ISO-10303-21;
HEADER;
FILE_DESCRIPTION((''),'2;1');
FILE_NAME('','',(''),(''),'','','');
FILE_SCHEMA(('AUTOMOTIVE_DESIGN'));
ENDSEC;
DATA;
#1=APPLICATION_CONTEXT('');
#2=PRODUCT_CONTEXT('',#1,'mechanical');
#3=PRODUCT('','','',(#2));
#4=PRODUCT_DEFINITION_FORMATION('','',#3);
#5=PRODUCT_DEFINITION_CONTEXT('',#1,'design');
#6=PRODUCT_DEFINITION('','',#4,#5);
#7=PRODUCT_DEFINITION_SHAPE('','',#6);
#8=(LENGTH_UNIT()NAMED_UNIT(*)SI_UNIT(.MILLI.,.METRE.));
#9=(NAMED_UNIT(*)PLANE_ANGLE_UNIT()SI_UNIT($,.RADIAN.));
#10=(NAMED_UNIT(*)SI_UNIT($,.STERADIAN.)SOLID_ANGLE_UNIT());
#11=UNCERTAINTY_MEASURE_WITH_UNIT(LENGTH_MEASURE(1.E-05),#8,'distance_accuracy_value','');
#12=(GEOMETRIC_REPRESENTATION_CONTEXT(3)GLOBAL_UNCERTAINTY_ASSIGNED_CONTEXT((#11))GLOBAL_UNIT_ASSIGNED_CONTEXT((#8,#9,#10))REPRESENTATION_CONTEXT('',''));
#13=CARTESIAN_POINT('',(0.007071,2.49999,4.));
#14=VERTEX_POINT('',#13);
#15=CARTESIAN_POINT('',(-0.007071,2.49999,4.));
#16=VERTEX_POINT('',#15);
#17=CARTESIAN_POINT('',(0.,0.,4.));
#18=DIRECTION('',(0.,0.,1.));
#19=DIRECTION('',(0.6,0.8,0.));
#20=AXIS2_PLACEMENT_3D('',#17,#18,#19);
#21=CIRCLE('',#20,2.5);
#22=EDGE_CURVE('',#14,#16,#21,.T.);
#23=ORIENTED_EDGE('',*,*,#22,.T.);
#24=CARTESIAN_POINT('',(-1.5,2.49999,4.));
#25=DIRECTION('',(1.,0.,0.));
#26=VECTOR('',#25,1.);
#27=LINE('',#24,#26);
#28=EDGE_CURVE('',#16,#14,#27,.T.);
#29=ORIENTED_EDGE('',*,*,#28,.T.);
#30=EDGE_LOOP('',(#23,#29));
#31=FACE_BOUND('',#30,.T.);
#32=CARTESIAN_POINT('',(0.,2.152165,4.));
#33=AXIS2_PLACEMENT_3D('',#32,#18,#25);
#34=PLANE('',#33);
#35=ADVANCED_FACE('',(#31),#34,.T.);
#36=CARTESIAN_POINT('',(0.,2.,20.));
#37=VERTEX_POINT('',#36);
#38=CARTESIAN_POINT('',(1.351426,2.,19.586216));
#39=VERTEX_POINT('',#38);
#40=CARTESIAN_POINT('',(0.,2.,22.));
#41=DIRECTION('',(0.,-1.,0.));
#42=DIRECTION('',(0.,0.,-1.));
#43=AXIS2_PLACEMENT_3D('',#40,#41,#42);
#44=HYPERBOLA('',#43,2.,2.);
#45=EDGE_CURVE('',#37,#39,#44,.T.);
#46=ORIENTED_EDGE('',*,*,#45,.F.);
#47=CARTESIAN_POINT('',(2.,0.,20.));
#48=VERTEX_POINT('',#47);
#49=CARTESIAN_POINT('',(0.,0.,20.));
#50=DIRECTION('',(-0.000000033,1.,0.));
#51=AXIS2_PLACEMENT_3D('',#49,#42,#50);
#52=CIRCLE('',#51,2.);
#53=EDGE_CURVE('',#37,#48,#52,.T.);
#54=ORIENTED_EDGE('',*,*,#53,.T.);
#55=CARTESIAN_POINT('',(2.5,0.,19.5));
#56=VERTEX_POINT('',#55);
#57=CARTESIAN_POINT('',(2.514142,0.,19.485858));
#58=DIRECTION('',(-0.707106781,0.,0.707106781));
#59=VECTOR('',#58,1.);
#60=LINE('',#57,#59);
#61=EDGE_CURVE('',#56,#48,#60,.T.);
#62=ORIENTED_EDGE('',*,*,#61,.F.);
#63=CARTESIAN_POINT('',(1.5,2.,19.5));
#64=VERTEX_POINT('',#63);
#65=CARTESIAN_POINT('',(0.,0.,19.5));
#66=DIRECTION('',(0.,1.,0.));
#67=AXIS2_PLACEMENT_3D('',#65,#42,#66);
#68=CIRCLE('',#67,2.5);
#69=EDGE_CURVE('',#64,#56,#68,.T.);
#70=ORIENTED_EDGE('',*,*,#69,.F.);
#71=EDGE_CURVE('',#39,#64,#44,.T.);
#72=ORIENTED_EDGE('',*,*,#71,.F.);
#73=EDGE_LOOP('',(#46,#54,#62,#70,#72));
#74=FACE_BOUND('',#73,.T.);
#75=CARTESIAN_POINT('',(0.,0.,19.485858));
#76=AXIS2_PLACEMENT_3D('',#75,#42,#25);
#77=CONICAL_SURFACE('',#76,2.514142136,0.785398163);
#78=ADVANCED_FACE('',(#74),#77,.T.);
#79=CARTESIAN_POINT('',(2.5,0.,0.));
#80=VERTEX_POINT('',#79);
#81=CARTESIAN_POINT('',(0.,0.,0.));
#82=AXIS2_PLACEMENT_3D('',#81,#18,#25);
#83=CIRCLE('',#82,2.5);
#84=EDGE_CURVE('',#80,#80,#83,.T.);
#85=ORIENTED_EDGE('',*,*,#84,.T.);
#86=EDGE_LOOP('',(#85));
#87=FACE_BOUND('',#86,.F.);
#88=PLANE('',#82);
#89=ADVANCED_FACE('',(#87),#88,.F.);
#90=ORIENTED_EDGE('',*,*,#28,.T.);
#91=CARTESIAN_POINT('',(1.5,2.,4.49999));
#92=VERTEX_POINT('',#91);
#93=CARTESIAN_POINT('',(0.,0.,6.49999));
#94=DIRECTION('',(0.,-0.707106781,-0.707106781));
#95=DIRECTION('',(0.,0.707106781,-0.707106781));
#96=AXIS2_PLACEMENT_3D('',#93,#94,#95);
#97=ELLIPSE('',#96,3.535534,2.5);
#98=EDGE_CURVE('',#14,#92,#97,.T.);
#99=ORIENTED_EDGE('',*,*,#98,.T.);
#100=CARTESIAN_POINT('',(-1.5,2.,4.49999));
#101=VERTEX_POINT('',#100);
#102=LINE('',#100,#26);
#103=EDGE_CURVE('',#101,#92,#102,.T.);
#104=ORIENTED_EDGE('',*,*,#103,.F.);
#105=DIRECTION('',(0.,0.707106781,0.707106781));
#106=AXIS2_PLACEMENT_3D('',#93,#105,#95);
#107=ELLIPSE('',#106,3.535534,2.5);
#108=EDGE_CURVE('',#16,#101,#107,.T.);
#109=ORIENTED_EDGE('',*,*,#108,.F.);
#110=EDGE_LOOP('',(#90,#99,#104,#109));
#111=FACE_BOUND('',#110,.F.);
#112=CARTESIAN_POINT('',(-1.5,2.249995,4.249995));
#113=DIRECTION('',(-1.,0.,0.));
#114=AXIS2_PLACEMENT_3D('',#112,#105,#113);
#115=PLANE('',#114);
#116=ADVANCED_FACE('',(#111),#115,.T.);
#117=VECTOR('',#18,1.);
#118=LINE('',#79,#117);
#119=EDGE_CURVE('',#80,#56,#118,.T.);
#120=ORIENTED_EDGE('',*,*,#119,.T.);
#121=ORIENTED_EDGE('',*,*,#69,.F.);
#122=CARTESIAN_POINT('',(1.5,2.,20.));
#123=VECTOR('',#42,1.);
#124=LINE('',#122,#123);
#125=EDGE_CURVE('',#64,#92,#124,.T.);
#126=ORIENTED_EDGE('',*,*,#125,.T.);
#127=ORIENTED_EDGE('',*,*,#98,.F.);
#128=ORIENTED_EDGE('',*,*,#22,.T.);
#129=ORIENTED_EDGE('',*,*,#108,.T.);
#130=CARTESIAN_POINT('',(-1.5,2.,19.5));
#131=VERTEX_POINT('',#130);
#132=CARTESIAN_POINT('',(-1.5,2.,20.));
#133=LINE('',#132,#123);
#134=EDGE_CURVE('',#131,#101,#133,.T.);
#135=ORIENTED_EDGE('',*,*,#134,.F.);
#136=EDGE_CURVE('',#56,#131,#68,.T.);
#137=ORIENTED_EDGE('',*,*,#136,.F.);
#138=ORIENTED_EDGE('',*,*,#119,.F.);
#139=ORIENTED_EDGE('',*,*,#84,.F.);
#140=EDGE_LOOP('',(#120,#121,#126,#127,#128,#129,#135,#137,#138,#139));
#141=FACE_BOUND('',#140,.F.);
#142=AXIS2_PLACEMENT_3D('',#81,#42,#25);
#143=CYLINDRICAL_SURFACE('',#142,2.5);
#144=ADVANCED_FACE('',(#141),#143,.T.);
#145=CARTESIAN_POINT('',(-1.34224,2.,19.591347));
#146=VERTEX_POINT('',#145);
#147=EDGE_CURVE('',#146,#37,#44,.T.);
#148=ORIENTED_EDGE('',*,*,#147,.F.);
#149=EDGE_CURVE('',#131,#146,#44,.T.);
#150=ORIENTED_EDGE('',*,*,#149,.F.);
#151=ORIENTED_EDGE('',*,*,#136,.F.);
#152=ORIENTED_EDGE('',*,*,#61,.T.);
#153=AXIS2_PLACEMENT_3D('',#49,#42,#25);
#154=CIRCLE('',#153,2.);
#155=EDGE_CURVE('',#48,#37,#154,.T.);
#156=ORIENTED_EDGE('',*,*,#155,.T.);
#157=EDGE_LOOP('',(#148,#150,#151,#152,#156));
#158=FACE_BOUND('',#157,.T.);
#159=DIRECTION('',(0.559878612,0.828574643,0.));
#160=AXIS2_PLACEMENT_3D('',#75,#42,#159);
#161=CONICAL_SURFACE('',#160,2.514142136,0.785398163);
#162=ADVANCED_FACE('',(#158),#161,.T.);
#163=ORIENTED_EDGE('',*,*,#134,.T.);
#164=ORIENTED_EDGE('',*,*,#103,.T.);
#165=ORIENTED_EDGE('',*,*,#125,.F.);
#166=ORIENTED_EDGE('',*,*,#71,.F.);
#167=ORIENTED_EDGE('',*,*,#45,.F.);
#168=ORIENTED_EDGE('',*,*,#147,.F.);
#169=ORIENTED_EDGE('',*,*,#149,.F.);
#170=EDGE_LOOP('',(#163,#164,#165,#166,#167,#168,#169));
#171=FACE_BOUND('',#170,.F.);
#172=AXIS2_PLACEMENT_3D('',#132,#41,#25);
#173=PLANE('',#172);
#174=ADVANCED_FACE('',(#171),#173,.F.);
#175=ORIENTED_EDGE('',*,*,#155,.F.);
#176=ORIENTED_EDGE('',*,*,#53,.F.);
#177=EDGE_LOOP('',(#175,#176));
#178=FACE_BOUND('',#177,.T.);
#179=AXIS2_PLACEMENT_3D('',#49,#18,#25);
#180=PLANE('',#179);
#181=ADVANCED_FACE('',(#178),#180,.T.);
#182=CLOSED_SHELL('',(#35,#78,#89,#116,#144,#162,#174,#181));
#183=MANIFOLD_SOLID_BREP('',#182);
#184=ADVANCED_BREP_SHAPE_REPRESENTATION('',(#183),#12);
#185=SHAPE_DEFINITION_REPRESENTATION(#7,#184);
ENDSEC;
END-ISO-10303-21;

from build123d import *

# Parameters (mm, degrees)
F0_R        = 2.5
F1_DEPTH    = 20
F3_DEPTH    = 16
F4_T2_ANGLE = 304.0474034012
F4_T4_ANGLE = 123.8663608487
F5_SIZE     = 0.49999


# Not quite as in the source:
# - a fillet or chamfer that OpenCascade refuses, or shapes differently, is made with other operations: its cross-section is extruded or revolved along the edge and cut away or added
# - a fillet or chamfer is up to 0.001 mm smaller than in the source, because OpenCascade refuses the exact size


with BuildPart() as f1:
    # F0 (on Top) → F1 (new body)
    with BuildSketch(Plane.XY):
        Circle(F0_R)
    extrude(amount=F1_DEPTH)

    # F2 (on face) → F3 (cut)
    with BuildSketch(Plane.XY.offset(20)):
        with BuildLine():
            ThreePointArc((1.5, 2), (0, 2.5), (-1.5, 2))
            Line((-1.5, 2), (1.5, 2))
        make_face()
    extrude(amount=-F3_DEPTH, mode=Mode.SUBTRACT)

    # F4: chamfer of 0.5 on 1 edges, made by hand

    # F4_s1 → F4_t2 (revolve, cut)
    with BuildSketch(Plane(origin=(0, 0, 0), x_dir=(0, 0, 1), z_dir=(0.8285746432, -0.5598786125, 0))):
        with BuildLine():
            Line((19.4858578644, -2.5141421356), (20.0141421356, -1.9858578644))
            Line((20.0141421356, -1.9858578644), (20.0241421356, -1.9858578644))
            ThreePointArc((20.0241421356, -1.9858578644), (20.01, -2.2429289322), (20.01, -2.5))
            Line((20.01, -2.5), (20, -2.51))
            ThreePointArc((20, -2.51), (19.7429289322, -2.51), (19.4858578644, -2.5241421356))
            Line((19.4858578644, -2.5241421356), (19.4858578644, -2.5141421356))
        make_face()
    revolve(axis=Axis((0, 0, 20), (0, 0, 1)), revolution_arc=F4_T2_ANGLE, mode=Mode.SUBTRACT)

    # F4_s3 → F4_t4 (revolve, cut)
    with BuildSketch(Plane.XZ):
        with BuildLine():
            Line((2.5141421356, 19.4858578644), (1.9858578644, 20.0141421356))
            Line((1.9858578644, 20.0141421356), (1.9858578644, 20.0241421356))
            ThreePointArc((1.9858578644, 20.0241421356), (2.2429289322, 20.01), (2.5, 20.01))
            Line((2.5, 20.01), (2.51, 20))
            ThreePointArc((2.51, 20), (2.51, 19.7429289322), (2.5241421356, 19.4858578644))
            Line((2.5241421356, 19.4858578644), (2.5141421356, 19.4858578644))
        make_face()
    revolve(axis=Axis((0, 0, 20), (0, 0, 1)), revolution_arc=F4_T4_ANGLE, mode=Mode.SUBTRACT)

    # F5 (size 0.5 in the source; OpenCascade refuses exactly that, so slightly less here)
    f5_edges = [f1.edges().sort_by_distance(p)[0] for p in [
        (0, 2, 4),
    ]]
    chamfer(f5_edges, length=F5_SIZE)


solid = f1.part
